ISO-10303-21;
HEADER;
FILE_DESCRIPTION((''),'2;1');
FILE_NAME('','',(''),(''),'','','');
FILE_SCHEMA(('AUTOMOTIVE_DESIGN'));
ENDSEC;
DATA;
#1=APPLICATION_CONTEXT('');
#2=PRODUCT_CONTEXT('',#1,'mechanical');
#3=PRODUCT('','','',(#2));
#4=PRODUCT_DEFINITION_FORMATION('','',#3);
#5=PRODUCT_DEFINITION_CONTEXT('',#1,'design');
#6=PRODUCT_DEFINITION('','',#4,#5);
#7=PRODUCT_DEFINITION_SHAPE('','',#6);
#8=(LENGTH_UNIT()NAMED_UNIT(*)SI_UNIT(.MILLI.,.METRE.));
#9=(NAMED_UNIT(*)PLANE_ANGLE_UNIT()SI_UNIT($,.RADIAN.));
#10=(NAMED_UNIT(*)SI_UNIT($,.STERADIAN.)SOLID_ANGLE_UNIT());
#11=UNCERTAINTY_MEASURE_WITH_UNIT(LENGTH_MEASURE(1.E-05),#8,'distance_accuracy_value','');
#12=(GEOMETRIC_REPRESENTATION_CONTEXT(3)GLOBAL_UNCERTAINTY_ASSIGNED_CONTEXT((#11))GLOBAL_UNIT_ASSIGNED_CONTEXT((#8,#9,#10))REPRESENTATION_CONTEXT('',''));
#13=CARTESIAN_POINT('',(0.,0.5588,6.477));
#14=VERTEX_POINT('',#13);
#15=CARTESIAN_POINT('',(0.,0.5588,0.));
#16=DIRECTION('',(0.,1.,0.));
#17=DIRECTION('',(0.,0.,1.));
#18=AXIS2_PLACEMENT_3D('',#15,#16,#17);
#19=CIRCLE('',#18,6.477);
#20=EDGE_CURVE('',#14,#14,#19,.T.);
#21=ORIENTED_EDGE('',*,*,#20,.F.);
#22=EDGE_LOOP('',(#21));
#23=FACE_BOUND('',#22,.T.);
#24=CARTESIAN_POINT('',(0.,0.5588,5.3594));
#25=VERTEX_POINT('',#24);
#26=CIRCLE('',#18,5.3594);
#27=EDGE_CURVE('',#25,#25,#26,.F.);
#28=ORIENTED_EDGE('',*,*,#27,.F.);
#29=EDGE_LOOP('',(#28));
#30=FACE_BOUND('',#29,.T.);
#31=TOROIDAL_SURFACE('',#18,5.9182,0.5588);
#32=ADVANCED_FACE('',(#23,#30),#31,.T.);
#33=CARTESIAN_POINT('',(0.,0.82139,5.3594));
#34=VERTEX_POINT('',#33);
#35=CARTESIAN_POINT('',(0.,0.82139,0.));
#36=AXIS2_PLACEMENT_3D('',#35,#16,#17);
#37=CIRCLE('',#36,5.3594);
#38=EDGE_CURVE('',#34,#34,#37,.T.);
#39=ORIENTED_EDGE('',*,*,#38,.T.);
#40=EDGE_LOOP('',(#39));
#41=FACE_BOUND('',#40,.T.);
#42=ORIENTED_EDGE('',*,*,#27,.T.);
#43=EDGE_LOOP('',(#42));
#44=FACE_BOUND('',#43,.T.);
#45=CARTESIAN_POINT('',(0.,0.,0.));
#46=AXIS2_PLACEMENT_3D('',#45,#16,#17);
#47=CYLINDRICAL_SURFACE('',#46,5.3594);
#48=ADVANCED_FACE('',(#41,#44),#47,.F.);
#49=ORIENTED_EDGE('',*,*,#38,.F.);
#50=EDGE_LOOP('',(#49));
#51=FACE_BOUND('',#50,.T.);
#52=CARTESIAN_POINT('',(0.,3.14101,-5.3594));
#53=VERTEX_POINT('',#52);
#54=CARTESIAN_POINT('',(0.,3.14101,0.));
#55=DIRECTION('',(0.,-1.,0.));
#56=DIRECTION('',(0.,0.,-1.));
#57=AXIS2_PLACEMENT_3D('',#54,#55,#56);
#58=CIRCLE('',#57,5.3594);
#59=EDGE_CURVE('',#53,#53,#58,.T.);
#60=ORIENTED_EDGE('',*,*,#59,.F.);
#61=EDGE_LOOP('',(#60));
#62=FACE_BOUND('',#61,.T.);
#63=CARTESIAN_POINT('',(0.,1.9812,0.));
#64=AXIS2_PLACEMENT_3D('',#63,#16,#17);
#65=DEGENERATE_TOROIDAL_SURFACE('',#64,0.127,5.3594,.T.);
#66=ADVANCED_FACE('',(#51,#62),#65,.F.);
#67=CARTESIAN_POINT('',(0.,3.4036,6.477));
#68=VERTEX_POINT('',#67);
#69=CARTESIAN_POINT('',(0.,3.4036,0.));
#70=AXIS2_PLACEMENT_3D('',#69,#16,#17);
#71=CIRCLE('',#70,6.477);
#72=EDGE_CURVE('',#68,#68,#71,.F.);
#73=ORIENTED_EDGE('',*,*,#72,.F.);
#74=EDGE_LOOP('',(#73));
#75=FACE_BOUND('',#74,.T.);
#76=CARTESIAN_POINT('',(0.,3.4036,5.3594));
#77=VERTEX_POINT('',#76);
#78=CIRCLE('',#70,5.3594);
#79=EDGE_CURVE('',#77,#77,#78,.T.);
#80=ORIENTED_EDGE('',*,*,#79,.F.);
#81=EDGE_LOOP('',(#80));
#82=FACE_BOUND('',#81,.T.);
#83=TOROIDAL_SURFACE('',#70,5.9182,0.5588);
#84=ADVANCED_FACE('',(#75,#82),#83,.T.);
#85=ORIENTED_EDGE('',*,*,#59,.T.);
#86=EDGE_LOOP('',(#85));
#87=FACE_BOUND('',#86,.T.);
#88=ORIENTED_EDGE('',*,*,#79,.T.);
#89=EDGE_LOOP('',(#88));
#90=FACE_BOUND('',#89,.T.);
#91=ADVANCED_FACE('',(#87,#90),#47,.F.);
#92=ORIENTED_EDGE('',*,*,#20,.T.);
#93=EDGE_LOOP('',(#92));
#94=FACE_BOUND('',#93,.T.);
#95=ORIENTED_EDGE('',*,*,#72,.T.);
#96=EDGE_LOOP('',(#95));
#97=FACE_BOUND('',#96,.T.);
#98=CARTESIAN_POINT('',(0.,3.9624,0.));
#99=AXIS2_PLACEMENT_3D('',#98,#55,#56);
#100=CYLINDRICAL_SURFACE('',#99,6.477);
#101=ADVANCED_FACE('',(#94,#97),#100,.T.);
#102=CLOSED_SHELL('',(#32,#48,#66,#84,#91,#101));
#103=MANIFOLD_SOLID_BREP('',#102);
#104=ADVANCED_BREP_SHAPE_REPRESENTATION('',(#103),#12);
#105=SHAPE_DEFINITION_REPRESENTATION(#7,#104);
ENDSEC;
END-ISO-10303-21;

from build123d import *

# Parameters (mm, degrees)
SKETCH2_R           = 6.477
BOSS_EXTRUDE1_DEPTH = 3.9624
SKETCH3_R           = 5.3594
CUT_EXTRUDE1_DEPTH  = 3.9624
FILLET1_R           = 0.5588
FILLET2_R           = 0.5588


with BuildPart() as part:
    # Sketch2 → Boss-Extrude1 (new body)
    with BuildSketch(Plane(origin=(0, 0, 0), x_dir=(1, 0, 0), z_dir=(0, 1, 0))):
        with Locations(Location((0, 0, 0), (0, 0, 270))):
            Circle(SKETCH2_R)
    extrude(amount=BOSS_EXTRUDE1_DEPTH)

    # Sketch3 → Cut-Extrude1 (cut)
    with BuildSketch(Plane(origin=(0, 3.9624, 0), x_dir=(1, 0, 0), z_dir=(0, 1, 0))):
        with Locations(Location((0, 0, 0), (0, 0, 270))):
            Circle(SKETCH3_R)
    extrude(amount=-CUT_EXTRUDE1_DEPTH, mode=Mode.SUBTRACT)

    # Fillet1
    fillet1_edges = [part.edges().sort_by_distance(p)[0] for p in [
        (0, 3.9624, -6.477),
        (0, 3.9624, -5.3594),
    ]]
    fillet(fillet1_edges, radius=FILLET1_R - 0.0001)  # a hair under: the kernel refuses the full size

    # Fillet2
    fillet2_edges = [part.edges().sort_by_distance(p)[0] for p in [
        (0, 0, -6.477),
        (0, 0, -5.3594),
    ]]
    fillet(fillet2_edges, radius=FILLET2_R - 0.0001)  # a hair under: the kernel refuses the full size

    # Sketch5 → Cut-Revolve3 (revolve, cut)
    with BuildSketch(Plane.XY, mode=Mode.PRIVATE) as cut_revolve3_sk:
        with BuildLine():
            Line((-5.106760528, 3.9624), (-5.106760528, 0))
            ThreePointArc((-5.106760528, 0), (-5.4864, 1.9812), (-5.106760528, 3.9624))
        make_face()
    revolve(cut_revolve3_sk.sketch.rotate(Axis((0, 0, 0), (0, -1, 0)), 270), axis=Axis((0, 0, 0), (0, -1, 0)), mode=Mode.SUBTRACT)


solid = part.part
